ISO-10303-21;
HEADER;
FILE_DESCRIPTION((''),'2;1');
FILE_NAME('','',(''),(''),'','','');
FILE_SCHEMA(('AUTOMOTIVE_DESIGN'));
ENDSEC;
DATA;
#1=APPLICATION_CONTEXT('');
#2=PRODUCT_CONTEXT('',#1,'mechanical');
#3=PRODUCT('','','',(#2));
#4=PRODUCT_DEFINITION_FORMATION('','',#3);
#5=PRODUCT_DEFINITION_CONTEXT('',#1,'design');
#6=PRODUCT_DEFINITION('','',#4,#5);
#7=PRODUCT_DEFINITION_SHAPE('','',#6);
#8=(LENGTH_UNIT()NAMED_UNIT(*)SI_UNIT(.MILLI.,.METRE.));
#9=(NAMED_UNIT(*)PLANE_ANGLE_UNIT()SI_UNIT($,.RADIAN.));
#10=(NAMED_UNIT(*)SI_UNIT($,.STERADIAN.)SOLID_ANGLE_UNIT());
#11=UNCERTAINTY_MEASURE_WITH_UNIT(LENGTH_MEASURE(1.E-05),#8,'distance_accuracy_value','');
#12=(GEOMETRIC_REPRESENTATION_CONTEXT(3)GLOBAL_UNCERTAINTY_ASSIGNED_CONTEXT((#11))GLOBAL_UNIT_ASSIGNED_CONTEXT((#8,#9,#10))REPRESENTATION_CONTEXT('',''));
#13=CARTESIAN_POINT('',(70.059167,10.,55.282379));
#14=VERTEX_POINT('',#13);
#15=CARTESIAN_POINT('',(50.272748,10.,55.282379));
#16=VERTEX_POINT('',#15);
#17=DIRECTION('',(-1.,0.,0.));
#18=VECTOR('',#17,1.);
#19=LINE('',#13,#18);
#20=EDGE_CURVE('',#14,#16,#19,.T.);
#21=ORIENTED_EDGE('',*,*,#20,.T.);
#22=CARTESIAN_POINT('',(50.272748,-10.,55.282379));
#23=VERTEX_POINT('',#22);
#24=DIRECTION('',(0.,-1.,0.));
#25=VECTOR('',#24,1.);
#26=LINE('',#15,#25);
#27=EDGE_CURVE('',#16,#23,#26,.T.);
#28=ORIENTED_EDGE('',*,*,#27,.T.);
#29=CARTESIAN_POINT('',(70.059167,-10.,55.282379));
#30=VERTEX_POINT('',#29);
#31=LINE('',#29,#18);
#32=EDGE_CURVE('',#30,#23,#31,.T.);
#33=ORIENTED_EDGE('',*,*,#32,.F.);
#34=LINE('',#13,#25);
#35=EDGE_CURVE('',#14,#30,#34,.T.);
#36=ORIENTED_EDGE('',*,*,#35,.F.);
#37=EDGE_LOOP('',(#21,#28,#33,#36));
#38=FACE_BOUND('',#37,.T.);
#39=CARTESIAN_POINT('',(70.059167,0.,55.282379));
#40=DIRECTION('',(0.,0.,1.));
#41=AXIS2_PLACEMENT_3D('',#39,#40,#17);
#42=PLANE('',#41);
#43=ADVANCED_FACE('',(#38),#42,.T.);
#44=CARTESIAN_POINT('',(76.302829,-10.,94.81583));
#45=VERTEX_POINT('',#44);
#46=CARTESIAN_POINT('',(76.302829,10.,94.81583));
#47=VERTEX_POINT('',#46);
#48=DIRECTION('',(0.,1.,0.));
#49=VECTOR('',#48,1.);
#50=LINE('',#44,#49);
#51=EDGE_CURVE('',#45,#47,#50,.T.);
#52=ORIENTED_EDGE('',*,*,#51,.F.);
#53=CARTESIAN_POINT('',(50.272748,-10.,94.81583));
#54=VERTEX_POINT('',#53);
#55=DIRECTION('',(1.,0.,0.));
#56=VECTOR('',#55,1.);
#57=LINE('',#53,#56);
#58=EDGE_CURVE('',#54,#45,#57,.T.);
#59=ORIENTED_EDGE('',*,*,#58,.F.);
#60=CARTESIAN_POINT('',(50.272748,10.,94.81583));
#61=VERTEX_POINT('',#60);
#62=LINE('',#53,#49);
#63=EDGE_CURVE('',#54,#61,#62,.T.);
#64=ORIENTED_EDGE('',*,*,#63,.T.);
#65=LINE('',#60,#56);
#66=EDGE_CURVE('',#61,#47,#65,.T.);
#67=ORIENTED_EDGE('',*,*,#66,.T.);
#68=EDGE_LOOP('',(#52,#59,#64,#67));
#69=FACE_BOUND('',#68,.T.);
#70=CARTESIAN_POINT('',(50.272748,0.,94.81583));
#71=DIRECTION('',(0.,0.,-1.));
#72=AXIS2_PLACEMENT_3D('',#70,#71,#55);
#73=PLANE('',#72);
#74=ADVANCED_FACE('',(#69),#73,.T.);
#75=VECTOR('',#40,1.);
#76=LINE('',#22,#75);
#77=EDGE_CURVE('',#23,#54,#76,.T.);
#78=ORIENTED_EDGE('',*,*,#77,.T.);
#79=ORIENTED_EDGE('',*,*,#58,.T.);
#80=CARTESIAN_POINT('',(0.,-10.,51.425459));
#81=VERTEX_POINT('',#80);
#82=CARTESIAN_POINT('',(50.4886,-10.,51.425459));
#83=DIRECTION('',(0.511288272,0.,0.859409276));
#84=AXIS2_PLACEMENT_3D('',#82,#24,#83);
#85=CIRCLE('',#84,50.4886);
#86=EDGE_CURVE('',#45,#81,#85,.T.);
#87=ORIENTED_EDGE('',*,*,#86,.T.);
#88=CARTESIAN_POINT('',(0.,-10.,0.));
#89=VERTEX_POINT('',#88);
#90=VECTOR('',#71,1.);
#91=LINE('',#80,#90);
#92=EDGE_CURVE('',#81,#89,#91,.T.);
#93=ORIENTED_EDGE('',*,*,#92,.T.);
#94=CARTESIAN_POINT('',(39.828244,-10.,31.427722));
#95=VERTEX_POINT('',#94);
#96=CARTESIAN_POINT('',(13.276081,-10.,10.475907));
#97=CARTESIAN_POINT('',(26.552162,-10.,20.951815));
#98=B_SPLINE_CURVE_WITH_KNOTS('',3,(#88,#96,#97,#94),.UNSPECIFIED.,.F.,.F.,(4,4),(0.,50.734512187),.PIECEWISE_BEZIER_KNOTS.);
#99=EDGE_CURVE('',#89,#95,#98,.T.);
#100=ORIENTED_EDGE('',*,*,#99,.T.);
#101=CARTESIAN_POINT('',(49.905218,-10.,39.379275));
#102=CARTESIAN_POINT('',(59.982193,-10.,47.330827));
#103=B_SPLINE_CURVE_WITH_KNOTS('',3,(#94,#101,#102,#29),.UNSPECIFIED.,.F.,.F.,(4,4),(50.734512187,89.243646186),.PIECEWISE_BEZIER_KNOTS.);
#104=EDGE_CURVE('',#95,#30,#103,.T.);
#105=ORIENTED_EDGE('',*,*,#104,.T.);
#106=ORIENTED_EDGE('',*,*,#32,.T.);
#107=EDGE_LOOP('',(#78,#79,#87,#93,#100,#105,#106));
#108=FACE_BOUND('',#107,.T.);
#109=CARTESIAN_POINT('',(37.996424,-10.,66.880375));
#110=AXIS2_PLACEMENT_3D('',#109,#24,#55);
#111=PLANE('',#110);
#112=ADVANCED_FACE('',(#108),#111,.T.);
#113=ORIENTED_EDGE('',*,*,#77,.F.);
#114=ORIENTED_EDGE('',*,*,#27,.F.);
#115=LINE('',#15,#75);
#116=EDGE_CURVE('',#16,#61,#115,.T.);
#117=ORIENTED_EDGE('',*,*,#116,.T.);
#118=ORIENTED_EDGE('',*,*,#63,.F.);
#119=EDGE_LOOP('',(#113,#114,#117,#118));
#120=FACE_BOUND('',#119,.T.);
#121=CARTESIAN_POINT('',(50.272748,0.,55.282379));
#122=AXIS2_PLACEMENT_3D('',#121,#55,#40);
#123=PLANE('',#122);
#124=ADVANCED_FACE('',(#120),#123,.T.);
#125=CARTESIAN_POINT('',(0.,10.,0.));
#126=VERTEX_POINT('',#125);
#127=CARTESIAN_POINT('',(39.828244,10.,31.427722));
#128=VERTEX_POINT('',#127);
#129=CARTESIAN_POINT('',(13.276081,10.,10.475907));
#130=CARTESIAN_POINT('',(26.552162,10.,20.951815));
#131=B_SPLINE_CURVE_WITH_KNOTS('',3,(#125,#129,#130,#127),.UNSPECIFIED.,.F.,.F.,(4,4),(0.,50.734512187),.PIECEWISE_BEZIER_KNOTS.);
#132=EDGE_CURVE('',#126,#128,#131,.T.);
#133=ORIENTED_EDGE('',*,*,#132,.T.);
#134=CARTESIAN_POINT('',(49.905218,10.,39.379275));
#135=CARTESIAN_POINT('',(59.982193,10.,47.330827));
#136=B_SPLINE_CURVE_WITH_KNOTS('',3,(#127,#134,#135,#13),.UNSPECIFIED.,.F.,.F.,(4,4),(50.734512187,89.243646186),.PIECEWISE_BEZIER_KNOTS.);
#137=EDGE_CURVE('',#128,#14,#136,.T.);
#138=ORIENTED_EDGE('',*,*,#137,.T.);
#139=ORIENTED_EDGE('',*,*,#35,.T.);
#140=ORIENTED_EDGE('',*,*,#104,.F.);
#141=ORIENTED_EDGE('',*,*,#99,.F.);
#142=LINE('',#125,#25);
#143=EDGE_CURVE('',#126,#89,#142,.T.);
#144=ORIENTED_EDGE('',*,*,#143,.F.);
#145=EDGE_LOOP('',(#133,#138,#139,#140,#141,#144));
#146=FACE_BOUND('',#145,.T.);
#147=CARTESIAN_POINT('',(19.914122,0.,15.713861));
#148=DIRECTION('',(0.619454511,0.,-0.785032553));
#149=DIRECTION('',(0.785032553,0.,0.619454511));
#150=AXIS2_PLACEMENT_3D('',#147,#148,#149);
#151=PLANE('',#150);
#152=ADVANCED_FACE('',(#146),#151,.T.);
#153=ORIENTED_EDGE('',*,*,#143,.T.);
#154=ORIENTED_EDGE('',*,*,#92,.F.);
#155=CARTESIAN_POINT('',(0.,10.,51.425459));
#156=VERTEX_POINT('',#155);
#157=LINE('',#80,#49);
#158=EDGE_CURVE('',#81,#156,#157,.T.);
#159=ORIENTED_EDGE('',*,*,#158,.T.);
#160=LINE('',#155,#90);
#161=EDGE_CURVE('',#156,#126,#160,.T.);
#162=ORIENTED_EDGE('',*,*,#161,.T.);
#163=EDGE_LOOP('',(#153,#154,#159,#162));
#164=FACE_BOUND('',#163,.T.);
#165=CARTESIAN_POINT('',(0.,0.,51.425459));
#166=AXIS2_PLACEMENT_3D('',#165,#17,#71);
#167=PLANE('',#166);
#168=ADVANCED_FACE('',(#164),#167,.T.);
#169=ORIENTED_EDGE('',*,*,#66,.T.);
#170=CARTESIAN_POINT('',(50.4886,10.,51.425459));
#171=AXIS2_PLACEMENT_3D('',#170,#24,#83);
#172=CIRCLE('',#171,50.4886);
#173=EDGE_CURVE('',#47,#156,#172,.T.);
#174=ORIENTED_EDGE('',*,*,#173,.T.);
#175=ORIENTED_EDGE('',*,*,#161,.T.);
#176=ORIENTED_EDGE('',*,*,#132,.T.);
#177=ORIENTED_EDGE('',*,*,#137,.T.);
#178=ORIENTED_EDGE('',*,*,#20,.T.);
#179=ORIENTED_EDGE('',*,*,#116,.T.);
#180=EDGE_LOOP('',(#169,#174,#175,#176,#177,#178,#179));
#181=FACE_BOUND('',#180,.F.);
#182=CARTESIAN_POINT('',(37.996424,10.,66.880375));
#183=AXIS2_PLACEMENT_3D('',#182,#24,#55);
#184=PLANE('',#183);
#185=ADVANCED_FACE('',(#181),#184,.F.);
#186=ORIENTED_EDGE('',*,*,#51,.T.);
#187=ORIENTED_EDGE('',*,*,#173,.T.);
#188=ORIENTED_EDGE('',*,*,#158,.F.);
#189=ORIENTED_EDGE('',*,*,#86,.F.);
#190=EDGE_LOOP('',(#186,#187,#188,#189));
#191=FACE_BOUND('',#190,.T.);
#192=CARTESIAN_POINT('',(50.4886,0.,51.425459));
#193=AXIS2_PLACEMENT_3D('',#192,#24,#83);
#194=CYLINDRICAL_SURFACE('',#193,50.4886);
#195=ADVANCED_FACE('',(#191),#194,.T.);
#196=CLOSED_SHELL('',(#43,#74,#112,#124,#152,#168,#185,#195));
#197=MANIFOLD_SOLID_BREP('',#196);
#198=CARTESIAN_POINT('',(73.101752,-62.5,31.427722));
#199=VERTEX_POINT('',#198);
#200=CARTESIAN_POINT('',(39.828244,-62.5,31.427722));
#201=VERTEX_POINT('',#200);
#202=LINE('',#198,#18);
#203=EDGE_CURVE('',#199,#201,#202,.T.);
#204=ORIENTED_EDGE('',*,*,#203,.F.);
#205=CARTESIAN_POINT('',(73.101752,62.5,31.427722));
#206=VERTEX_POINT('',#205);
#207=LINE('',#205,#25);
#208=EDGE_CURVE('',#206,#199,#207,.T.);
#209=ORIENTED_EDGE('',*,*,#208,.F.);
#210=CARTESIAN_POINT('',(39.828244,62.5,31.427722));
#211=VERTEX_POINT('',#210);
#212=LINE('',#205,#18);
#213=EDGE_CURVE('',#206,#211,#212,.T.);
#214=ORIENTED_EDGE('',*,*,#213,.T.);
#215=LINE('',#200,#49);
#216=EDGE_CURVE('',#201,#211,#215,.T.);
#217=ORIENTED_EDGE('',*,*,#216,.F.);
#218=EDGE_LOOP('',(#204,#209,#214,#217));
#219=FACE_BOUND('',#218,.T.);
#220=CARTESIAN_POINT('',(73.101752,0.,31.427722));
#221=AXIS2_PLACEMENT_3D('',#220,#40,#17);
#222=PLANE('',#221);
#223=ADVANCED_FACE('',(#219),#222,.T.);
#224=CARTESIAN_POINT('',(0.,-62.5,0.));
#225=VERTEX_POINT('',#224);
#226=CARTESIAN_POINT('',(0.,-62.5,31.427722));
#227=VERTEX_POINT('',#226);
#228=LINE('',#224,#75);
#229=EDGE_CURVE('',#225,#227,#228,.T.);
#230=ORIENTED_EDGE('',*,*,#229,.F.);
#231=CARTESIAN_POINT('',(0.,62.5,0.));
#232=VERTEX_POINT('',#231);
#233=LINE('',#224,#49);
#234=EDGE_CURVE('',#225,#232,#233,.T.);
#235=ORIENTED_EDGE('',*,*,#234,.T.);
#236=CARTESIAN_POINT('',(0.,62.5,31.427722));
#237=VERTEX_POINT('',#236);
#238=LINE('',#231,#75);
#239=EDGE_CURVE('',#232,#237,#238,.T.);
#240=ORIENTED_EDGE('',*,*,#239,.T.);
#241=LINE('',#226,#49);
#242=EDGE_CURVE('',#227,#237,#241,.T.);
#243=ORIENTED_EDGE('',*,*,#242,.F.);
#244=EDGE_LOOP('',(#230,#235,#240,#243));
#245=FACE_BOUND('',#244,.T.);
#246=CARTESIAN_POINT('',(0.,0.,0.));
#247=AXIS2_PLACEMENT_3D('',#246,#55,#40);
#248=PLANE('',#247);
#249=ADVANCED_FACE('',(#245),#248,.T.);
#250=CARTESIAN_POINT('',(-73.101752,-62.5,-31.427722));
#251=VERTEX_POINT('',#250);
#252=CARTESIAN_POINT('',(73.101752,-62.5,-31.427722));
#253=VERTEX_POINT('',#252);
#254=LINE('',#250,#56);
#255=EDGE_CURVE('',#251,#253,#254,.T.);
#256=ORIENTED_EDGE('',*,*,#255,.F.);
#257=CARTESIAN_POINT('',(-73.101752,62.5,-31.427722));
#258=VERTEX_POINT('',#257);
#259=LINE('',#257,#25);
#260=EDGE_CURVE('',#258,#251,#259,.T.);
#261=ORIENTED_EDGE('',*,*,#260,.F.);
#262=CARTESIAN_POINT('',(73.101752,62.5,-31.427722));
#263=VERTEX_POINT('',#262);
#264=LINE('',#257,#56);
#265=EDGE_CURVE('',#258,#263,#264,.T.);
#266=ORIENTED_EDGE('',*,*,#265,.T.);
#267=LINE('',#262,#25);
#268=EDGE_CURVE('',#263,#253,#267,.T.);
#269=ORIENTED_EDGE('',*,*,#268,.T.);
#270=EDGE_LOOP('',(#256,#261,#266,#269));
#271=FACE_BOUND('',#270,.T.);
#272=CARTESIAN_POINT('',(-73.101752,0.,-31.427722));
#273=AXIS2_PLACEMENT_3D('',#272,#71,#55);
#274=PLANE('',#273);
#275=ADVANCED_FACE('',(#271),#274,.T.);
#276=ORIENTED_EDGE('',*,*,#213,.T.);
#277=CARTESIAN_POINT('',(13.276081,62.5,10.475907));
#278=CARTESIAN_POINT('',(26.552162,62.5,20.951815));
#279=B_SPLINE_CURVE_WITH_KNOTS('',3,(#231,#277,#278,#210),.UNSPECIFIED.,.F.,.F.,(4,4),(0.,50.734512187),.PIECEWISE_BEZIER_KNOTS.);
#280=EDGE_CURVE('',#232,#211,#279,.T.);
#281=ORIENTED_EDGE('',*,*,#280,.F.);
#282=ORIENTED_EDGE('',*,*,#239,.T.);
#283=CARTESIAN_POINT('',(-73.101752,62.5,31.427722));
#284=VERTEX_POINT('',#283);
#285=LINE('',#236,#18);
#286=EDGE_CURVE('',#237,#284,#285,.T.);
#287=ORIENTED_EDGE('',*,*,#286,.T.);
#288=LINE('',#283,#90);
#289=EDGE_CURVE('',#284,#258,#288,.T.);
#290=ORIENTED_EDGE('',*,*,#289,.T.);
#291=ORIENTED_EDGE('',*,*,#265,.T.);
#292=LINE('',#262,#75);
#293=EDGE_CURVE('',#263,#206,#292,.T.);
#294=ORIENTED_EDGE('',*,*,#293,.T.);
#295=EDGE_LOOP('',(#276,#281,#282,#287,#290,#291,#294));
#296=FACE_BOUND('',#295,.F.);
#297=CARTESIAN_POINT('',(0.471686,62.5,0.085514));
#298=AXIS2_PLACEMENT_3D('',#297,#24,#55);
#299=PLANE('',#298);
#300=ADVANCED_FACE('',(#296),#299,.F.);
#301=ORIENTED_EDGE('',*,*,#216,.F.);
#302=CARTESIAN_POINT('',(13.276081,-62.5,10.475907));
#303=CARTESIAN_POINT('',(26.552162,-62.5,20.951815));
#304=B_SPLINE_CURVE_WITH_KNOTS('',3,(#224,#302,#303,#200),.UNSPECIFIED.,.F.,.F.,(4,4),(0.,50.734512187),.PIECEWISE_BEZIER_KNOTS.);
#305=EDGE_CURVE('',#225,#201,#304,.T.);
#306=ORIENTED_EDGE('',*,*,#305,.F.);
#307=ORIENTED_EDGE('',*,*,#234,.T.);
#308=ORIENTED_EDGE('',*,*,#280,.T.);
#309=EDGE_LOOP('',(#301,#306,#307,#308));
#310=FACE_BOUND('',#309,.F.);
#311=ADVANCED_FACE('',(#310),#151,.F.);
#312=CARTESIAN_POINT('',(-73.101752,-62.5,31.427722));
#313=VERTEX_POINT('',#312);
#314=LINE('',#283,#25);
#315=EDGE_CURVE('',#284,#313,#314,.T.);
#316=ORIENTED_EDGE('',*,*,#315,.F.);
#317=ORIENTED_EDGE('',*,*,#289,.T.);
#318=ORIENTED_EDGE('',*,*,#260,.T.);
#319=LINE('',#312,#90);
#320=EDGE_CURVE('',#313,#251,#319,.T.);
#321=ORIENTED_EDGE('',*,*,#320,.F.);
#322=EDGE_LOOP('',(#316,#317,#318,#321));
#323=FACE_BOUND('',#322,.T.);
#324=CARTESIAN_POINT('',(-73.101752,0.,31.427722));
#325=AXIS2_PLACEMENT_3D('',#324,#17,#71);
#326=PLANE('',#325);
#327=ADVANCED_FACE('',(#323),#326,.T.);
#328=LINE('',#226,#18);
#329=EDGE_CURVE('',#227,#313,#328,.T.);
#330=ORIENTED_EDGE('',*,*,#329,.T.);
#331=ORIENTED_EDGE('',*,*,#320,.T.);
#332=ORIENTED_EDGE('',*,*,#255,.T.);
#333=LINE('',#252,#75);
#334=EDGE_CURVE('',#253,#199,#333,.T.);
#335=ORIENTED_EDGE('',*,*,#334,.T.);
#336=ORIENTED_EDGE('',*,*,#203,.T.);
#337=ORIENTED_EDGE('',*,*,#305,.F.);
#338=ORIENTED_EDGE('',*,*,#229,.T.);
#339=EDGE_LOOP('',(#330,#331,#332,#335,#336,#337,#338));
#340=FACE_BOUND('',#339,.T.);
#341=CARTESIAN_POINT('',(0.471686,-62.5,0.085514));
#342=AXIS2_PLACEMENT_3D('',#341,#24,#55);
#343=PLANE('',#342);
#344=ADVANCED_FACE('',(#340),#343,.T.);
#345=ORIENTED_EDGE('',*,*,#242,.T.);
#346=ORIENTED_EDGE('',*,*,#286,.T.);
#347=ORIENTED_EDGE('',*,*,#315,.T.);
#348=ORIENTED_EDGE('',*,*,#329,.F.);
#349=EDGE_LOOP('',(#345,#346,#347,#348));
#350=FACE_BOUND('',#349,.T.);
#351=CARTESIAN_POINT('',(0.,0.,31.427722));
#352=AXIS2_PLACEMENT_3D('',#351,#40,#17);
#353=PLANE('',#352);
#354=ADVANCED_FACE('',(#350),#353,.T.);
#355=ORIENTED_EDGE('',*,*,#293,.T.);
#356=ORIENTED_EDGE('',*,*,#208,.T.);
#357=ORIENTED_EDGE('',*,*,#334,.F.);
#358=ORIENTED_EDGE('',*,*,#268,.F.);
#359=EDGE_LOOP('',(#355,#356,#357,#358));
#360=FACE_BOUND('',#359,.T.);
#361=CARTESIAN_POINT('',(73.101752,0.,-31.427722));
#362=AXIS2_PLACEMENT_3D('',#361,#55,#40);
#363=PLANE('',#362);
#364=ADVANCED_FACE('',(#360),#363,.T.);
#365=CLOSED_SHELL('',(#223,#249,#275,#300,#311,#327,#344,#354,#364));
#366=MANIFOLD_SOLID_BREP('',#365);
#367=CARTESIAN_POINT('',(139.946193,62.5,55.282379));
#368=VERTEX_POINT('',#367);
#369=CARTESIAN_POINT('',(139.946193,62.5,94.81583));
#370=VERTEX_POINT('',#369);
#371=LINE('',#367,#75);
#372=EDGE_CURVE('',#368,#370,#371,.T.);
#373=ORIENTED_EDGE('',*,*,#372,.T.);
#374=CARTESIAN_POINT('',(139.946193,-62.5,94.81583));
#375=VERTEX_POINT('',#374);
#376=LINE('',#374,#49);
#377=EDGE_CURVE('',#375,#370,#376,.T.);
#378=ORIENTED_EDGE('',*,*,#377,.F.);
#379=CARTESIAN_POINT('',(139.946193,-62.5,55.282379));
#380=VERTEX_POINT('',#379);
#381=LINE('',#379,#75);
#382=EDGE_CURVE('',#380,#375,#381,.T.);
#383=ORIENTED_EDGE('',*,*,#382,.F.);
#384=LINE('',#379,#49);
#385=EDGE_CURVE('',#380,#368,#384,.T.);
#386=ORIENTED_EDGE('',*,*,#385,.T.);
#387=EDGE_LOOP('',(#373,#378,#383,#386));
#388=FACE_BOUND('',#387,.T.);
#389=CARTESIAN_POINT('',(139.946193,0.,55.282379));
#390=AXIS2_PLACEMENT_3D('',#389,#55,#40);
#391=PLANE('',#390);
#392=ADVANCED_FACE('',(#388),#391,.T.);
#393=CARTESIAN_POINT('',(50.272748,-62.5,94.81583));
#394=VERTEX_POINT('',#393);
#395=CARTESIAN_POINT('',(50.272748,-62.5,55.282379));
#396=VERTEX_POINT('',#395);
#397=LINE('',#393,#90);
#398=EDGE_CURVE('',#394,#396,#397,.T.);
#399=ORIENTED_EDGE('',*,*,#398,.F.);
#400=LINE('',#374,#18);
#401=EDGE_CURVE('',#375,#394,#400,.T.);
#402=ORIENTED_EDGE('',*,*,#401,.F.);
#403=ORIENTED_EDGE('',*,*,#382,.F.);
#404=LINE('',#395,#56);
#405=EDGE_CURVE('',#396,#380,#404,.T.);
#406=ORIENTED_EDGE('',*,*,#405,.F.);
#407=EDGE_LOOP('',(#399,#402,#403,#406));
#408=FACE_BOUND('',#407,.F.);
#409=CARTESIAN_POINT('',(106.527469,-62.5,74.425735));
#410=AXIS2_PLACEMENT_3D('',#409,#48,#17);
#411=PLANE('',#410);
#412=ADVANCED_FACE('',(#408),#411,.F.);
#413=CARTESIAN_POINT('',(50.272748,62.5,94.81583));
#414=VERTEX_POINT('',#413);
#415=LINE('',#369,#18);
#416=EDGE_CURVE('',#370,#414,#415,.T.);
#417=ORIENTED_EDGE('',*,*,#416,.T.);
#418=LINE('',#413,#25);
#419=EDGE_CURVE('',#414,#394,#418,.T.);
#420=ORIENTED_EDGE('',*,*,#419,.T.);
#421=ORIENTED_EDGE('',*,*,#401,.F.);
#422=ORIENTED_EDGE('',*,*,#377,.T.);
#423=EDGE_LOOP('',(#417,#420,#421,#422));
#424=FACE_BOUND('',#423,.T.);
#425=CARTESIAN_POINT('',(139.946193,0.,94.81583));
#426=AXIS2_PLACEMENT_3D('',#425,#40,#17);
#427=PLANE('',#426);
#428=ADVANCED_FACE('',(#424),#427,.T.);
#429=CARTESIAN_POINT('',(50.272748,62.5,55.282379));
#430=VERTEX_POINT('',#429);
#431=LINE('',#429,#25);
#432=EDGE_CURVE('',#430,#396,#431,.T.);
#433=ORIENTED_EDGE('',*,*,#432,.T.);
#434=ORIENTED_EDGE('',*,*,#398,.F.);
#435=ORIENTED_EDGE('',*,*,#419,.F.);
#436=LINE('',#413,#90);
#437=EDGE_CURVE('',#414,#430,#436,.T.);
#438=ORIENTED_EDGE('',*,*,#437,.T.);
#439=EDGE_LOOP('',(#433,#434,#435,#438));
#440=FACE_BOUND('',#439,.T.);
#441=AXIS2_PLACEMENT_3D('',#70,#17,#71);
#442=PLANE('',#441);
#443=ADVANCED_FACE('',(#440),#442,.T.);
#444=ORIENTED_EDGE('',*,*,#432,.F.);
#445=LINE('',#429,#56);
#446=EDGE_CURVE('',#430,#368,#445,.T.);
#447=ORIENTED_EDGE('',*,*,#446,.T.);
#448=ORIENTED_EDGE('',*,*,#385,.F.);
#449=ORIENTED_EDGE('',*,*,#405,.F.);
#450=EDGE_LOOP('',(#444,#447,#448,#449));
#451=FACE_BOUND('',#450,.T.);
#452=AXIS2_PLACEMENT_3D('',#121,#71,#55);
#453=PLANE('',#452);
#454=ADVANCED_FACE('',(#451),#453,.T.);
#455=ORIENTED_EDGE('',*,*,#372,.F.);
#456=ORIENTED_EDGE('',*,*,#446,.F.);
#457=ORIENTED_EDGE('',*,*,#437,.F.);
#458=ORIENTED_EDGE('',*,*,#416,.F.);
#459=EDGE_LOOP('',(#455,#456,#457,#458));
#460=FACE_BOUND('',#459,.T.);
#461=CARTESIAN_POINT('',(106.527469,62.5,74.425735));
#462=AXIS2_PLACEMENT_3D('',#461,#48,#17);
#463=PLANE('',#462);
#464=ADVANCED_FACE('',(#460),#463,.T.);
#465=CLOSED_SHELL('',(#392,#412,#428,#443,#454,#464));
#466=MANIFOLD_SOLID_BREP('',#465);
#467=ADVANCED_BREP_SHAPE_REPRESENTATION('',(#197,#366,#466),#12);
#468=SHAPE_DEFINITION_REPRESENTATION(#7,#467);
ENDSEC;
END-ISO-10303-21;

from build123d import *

# Parameters (mm, degrees)
F1_DEPTH = 62.5
F2_DEPTH = 10


with BuildPart() as f1:
    # F0 (on Front) → F1 (new body, symmetric)
    with BuildSketch(Plane.XZ):
        with BuildLine():
            Line((0, 31.4277224243), (-73.1017515063, 31.4277224243))
            Line((-73.1017515063, 31.4277224243), (-73.1017515063, -31.4277224243))
            Line((-73.1017515063, -31.4277224243), (73.1017515063, -31.4277224243))
            Line((73.1017515063, -31.4277224243), (73.1017515063, 31.4277224243))
            Line((73.1017515063, 31.4277224243), (39.8282436226, 31.4277224243))
            add(Edge.make_bspline(
                [(0, 0), (13.2760812075, 10.4759074748), (26.552162415, 20.9518149495), (39.8282436226, 31.4277224243)],
                knots=[0, 0, 0, 0, 50.7345121868, 50.7345121868, 50.7345121868, 50.7345121868], degree=3))
            Line((0, 0), (0, 31.4277224243))
        make_face()
    extrude(amount=F1_DEPTH, both=True)


with BuildPart() as f1b:
    # F0 (on Front) → F1, piece 2 (new body, symmetric)
    with BuildSketch(Plane.XZ):
        with BuildLine():
            add(Edge.make_bspline(
                [(70.0591673961, 55.2823791846), (78.4092683269, 61.8712877179), (86.7593692578, 68.4601962511), (95.1094701886, 75.0491047844)],
                knots=[89.2436461858, 89.2436461858, 89.2436461858, 89.2436461858, 121.1535366735, 121.1535366735, 121.1535366735, 121.1535366735], degree=3))
            Line((70.0591673961, 55.2823791846), (139.946192503, 55.2823791846))
            Line((139.946192503, 55.2823791846), (139.946192503, 94.8158303842))
            Line((139.946192503, 94.8158303842), (76.3028285899, 94.8158303842))
            ThreePointArc((76.3028285899, 94.8158303842), (87.066689677, 86.2269254571), (95.1094701886, 75.0491047844))
        make_face()
        with BuildLine():
            Line((50.2727478743, 55.2823791846), (70.0591673961, 55.2823791846))
            add(Edge.make_bspline(
                [(70.0591673961, 55.2823791846), (78.4092683269, 61.8712877179), (86.7593692578, 68.4601962511), (95.1094701886, 75.0491047844)],
                knots=[89.2436461858, 89.2436461858, 89.2436461858, 89.2436461858, 121.1535366735, 121.1535366735, 121.1535366735, 121.1535366735], degree=3))
            ThreePointArc((95.1094701886, 75.0491047844), (87.066689677, 86.2269254571), (76.3028285899, 94.8158303842))
            Line((76.3028285899, 94.8158303842), (50.2727478743, 94.8158303842))
            Line((50.2727478743, 94.8158303842), (50.2727478743, 55.2823791846))
        make_face()
    extrude(amount=F1_DEPTH, both=True)


with BuildPart() as f2:
    # F0 (on Front) → F2 (new body, symmetric)
    with BuildSketch(Plane.XZ):
        with BuildLine():
            Line((0, 51.4254594788), (0, 31.4277224243))
            Line((0, 31.4277224243), (39.8282436226, 31.4277224243))
            add(Edge.make_bspline(
                [(39.8282436226, 31.4277224243), (49.9052182137, 39.3792746777), (59.9821928049, 47.3308269312), (70.0591673961, 55.2823791846)],
                knots=[50.7345121868, 50.7345121868, 50.7345121868, 50.7345121868, 89.2436461858, 89.2436461858, 89.2436461858, 89.2436461858], degree=3))
            Line((70.0591673961, 55.2823791846), (50.2727478743, 55.2823791846))
            Line((50.2727478743, 55.2823791846), (50.2727478743, 94.8158303842))
            Line((50.2727478743, 94.8158303842), (76.3028285899, 94.8158303842))
            ThreePointArc((76.3028285899, 94.8158303842), (25.5308911631, 95.3140853917), (0, 51.4254594788))
        make_face()
        with BuildLine():
            Line((39.8282436226, 31.4277224243), (0, 31.4277224243))
            Line((0, 31.4277224243), (0, 0))
            add(Edge.make_bspline(
                [(0, 0), (13.2760812075, 10.4759074748), (26.552162415, 20.9518149495), (39.8282436226, 31.4277224243)],
                knots=[0, 0, 0, 0, 50.7345121868, 50.7345121868, 50.7345121868, 50.7345121868], degree=3))
        make_face()
    extrude(amount=F2_DEPTH, both=True)


solid = Compound([f1.part, f1b.part, f2.part])
